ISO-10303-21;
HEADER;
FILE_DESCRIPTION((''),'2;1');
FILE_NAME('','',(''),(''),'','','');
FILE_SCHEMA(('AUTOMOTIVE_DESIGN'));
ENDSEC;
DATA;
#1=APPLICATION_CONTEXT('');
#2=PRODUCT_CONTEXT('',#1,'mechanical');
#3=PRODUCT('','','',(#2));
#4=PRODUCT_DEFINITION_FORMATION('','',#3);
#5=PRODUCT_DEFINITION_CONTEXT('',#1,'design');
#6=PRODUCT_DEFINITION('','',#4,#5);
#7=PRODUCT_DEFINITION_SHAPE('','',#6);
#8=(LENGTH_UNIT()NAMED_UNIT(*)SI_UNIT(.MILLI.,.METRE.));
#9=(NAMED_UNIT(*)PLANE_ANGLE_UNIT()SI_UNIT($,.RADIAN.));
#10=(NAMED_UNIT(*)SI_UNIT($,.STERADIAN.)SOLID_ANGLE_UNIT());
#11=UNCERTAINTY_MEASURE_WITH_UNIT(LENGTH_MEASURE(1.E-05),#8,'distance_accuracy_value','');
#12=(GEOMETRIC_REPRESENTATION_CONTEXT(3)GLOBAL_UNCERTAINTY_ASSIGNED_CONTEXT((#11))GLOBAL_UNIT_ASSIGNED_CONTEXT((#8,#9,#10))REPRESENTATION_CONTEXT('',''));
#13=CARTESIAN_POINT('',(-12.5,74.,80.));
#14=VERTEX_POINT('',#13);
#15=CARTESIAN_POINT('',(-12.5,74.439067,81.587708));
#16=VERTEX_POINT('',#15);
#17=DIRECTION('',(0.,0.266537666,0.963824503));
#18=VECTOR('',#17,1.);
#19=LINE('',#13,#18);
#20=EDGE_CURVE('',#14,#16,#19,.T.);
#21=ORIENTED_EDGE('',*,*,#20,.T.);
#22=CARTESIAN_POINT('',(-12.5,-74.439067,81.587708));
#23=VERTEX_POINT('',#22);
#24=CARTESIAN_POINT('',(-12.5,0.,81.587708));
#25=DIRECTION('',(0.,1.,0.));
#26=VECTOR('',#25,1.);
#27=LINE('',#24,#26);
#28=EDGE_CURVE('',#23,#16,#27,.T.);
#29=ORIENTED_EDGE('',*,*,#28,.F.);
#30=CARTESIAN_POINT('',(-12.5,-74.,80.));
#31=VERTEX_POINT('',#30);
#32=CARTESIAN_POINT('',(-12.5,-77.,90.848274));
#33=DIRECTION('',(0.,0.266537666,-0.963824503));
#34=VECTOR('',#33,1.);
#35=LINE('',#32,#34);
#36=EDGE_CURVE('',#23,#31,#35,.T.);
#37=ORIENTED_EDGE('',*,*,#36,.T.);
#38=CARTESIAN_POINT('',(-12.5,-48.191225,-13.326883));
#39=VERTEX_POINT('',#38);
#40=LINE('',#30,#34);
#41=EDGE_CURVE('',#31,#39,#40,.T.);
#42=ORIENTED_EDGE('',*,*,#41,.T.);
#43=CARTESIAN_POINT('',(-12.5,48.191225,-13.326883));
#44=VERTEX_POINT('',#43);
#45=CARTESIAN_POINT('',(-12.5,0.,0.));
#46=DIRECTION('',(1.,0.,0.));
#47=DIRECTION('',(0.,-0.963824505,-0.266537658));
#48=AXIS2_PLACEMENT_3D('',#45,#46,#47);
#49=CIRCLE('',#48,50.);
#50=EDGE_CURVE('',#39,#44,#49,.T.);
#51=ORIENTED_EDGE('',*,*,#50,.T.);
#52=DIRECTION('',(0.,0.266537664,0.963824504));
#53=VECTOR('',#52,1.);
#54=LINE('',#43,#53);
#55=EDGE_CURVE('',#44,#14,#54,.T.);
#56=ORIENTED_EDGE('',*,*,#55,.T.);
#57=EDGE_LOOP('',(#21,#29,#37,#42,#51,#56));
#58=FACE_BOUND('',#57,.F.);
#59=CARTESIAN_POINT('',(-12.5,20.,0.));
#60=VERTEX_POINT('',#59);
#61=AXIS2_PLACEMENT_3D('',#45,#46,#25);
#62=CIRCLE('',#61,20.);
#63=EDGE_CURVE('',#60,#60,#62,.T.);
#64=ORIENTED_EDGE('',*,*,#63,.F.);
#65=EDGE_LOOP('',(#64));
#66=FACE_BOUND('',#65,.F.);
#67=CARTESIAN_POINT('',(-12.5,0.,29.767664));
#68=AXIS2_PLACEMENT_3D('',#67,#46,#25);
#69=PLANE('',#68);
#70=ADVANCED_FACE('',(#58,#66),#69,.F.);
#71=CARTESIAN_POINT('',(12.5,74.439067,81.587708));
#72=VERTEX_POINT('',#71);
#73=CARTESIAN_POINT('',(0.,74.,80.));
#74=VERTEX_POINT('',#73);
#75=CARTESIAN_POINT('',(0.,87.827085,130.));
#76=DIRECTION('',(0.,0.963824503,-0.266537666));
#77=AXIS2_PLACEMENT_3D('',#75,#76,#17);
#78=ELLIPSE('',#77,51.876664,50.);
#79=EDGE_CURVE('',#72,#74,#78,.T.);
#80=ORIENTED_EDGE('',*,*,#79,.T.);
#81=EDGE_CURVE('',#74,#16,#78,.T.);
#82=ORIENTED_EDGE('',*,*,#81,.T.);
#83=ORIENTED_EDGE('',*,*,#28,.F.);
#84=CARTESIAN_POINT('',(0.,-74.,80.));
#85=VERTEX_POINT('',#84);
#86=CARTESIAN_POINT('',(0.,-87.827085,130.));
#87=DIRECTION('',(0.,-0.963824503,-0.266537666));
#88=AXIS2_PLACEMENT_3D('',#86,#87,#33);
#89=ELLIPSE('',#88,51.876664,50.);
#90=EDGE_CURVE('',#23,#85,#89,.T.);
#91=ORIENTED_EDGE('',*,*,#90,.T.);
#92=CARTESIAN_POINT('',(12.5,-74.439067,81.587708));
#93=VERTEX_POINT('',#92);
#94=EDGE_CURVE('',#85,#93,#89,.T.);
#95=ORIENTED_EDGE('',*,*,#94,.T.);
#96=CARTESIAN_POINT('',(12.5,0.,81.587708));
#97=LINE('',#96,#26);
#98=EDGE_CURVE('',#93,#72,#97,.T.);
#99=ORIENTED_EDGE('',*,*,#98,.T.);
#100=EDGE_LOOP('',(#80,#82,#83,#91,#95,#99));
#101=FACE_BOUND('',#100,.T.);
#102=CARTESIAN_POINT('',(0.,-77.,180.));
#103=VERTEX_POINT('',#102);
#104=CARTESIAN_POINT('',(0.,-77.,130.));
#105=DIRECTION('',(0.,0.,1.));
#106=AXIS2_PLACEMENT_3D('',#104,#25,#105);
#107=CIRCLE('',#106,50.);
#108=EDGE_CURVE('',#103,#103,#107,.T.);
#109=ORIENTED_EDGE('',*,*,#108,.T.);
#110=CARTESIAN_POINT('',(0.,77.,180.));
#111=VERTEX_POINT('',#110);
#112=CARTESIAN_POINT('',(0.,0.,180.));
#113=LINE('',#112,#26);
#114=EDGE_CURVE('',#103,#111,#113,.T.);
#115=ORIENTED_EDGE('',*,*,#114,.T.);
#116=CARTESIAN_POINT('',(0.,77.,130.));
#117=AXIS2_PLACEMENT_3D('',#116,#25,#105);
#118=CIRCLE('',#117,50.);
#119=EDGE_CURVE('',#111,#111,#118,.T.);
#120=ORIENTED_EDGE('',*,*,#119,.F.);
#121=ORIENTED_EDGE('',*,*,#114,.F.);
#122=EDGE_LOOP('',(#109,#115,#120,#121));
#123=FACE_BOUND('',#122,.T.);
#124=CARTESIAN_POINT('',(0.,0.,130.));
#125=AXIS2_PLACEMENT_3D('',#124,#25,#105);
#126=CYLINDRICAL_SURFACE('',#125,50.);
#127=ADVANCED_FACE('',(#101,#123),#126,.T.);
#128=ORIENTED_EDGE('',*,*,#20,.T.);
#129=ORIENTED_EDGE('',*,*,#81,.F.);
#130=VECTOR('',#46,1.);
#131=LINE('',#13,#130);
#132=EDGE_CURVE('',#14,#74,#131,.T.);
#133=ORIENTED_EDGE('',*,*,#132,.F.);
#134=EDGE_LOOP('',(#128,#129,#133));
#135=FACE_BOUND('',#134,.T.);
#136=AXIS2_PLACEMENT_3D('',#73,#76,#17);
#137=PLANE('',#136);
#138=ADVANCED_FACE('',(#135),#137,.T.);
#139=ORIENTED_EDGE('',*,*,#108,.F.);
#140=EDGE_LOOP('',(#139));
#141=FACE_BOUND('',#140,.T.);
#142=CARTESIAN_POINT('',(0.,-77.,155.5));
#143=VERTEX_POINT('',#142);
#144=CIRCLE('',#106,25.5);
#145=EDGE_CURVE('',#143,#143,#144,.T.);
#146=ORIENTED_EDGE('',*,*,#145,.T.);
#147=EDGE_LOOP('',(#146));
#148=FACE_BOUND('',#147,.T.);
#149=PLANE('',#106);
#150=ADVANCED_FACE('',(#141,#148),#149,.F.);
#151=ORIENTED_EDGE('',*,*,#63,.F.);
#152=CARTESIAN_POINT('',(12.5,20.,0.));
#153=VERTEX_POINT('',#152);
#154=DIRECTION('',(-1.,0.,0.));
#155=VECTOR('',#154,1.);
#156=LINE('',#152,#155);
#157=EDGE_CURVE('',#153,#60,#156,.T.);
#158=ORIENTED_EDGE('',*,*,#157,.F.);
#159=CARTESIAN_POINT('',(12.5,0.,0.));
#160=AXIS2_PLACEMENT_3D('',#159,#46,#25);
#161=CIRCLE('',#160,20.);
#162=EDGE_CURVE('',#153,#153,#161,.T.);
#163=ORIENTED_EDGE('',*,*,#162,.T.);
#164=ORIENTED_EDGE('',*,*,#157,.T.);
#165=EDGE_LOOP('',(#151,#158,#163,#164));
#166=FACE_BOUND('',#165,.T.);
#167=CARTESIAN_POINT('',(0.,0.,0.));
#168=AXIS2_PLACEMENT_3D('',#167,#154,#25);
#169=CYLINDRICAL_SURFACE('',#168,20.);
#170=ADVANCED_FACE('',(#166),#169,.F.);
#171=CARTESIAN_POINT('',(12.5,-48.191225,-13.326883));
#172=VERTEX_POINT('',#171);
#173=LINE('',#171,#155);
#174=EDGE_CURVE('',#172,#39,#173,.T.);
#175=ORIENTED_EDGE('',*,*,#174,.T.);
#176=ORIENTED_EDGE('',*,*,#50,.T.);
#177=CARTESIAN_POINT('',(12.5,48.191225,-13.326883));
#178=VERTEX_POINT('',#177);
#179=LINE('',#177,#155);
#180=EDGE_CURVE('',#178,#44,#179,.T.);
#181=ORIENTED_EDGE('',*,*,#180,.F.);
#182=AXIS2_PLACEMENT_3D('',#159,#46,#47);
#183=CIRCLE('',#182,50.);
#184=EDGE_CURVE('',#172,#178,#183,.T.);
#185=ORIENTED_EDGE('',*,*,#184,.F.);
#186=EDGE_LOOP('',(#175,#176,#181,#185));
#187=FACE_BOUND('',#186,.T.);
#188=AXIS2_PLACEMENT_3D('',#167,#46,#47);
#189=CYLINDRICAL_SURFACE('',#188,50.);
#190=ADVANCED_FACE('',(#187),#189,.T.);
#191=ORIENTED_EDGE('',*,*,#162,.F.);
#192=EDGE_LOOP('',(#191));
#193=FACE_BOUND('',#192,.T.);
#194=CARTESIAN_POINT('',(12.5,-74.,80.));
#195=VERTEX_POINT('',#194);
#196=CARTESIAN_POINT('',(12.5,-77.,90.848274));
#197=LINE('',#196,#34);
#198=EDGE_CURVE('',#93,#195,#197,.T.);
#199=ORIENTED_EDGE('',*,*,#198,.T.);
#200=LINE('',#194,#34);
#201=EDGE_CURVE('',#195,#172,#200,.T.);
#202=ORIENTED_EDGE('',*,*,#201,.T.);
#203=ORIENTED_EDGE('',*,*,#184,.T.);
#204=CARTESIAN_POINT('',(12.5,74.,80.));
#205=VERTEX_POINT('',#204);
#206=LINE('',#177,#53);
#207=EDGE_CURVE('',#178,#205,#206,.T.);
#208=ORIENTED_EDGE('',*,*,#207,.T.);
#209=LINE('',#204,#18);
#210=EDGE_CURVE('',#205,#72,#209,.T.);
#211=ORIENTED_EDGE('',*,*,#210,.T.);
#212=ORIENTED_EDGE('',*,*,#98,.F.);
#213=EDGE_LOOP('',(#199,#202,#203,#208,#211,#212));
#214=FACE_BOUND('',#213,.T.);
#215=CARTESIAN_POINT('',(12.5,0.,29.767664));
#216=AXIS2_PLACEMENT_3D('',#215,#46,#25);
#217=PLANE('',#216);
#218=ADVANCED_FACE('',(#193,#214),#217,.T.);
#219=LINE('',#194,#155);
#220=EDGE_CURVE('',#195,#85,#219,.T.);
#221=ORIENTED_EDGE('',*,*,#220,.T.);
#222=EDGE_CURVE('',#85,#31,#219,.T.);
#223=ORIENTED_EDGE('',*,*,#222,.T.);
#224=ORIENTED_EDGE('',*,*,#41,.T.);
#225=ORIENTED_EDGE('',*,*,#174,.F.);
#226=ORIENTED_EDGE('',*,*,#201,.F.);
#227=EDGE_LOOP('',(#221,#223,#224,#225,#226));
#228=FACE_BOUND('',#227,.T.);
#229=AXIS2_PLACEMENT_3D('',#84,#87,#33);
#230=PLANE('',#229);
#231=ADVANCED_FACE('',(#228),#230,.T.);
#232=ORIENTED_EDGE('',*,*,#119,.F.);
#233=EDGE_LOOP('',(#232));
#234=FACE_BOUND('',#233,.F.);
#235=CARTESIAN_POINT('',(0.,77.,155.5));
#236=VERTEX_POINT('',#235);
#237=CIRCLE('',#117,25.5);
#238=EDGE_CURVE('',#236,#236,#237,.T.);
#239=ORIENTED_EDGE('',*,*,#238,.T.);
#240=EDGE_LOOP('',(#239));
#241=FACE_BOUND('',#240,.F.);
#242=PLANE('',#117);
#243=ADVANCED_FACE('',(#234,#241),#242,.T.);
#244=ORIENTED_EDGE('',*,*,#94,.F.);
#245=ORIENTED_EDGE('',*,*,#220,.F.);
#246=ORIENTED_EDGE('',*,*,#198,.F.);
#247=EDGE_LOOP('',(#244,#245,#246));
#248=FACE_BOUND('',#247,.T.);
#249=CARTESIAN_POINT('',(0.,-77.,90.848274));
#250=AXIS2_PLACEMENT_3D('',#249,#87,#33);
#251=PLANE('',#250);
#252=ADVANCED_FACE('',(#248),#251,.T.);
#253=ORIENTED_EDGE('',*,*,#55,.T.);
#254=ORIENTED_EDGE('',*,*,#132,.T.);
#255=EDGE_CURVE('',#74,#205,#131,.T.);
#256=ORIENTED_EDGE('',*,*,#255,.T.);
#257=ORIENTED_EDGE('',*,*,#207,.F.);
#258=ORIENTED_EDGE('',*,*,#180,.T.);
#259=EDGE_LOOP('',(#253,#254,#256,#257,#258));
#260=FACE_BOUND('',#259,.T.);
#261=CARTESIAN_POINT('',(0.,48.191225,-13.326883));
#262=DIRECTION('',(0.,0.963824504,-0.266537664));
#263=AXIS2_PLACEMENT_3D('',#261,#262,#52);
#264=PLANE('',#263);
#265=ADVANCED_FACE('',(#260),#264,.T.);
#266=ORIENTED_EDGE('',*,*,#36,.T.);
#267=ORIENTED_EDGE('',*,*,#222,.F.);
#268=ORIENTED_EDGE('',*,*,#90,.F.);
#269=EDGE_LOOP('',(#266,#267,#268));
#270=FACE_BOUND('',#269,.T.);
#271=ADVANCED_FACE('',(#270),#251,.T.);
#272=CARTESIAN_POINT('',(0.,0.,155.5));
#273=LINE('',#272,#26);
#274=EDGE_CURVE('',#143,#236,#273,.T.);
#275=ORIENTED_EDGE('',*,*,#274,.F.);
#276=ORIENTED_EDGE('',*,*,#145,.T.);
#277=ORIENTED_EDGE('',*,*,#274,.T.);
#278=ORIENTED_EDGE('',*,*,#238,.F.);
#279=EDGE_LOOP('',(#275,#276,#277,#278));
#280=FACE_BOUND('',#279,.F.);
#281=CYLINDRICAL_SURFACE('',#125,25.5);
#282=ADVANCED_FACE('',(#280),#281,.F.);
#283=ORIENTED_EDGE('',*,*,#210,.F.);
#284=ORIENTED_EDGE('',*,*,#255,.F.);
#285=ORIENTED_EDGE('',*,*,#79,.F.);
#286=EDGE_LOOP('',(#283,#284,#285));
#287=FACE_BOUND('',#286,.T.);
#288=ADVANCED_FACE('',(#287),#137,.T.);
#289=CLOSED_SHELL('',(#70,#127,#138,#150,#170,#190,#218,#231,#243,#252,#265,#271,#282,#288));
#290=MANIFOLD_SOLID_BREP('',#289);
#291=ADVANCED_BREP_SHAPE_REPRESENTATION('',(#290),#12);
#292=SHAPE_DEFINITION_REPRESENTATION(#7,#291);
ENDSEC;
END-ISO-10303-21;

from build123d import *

# Parameters (mm, degrees)
F0_R     = 20
F1_DEPTH = 12.5
F0_W     = 154
F0_H     = 24.5


# Not quite as in the source:
# - ends of sketch curves that miss each other by under 0.0002 mm in the source are joined


with BuildPart() as f1:
    # F0 (on Right) → F1 (new body, symmetric)
    with BuildSketch(Plane.YZ):
        with BuildLine():
            Line((73.9999998675, 80), (-73.9999998675, 80))
            Line((-73.9999998675, 80), (-48.191225, -13.326883))
            ThreePointArc((-48.191225, -13.326883), (0, -50), (48.1912252169, -13.32688306))
            Line((48.1912252169, -13.32688306), (73.9999998675, 80))
        make_face()
        Circle(F0_R, mode=Mode.SUBTRACT)
        Polygon((-77, 104.5), (-77, 90.848274), (-73.9999998675, 80), (73.9999998675, 80), (77, 90.848274), (77, 104.5), align=None)
    extrude(amount=F1_DEPTH, both=True)

    # F0 (on Right) → F2 (revolve)
    with BuildSketch(Plane.YZ):
        with Locations((0, 167.75)):
            Rectangle(F0_W, F0_H)
    revolve(axis=Axis((0, 0, 130), (0, 1, 0)))


solid = f1.part
